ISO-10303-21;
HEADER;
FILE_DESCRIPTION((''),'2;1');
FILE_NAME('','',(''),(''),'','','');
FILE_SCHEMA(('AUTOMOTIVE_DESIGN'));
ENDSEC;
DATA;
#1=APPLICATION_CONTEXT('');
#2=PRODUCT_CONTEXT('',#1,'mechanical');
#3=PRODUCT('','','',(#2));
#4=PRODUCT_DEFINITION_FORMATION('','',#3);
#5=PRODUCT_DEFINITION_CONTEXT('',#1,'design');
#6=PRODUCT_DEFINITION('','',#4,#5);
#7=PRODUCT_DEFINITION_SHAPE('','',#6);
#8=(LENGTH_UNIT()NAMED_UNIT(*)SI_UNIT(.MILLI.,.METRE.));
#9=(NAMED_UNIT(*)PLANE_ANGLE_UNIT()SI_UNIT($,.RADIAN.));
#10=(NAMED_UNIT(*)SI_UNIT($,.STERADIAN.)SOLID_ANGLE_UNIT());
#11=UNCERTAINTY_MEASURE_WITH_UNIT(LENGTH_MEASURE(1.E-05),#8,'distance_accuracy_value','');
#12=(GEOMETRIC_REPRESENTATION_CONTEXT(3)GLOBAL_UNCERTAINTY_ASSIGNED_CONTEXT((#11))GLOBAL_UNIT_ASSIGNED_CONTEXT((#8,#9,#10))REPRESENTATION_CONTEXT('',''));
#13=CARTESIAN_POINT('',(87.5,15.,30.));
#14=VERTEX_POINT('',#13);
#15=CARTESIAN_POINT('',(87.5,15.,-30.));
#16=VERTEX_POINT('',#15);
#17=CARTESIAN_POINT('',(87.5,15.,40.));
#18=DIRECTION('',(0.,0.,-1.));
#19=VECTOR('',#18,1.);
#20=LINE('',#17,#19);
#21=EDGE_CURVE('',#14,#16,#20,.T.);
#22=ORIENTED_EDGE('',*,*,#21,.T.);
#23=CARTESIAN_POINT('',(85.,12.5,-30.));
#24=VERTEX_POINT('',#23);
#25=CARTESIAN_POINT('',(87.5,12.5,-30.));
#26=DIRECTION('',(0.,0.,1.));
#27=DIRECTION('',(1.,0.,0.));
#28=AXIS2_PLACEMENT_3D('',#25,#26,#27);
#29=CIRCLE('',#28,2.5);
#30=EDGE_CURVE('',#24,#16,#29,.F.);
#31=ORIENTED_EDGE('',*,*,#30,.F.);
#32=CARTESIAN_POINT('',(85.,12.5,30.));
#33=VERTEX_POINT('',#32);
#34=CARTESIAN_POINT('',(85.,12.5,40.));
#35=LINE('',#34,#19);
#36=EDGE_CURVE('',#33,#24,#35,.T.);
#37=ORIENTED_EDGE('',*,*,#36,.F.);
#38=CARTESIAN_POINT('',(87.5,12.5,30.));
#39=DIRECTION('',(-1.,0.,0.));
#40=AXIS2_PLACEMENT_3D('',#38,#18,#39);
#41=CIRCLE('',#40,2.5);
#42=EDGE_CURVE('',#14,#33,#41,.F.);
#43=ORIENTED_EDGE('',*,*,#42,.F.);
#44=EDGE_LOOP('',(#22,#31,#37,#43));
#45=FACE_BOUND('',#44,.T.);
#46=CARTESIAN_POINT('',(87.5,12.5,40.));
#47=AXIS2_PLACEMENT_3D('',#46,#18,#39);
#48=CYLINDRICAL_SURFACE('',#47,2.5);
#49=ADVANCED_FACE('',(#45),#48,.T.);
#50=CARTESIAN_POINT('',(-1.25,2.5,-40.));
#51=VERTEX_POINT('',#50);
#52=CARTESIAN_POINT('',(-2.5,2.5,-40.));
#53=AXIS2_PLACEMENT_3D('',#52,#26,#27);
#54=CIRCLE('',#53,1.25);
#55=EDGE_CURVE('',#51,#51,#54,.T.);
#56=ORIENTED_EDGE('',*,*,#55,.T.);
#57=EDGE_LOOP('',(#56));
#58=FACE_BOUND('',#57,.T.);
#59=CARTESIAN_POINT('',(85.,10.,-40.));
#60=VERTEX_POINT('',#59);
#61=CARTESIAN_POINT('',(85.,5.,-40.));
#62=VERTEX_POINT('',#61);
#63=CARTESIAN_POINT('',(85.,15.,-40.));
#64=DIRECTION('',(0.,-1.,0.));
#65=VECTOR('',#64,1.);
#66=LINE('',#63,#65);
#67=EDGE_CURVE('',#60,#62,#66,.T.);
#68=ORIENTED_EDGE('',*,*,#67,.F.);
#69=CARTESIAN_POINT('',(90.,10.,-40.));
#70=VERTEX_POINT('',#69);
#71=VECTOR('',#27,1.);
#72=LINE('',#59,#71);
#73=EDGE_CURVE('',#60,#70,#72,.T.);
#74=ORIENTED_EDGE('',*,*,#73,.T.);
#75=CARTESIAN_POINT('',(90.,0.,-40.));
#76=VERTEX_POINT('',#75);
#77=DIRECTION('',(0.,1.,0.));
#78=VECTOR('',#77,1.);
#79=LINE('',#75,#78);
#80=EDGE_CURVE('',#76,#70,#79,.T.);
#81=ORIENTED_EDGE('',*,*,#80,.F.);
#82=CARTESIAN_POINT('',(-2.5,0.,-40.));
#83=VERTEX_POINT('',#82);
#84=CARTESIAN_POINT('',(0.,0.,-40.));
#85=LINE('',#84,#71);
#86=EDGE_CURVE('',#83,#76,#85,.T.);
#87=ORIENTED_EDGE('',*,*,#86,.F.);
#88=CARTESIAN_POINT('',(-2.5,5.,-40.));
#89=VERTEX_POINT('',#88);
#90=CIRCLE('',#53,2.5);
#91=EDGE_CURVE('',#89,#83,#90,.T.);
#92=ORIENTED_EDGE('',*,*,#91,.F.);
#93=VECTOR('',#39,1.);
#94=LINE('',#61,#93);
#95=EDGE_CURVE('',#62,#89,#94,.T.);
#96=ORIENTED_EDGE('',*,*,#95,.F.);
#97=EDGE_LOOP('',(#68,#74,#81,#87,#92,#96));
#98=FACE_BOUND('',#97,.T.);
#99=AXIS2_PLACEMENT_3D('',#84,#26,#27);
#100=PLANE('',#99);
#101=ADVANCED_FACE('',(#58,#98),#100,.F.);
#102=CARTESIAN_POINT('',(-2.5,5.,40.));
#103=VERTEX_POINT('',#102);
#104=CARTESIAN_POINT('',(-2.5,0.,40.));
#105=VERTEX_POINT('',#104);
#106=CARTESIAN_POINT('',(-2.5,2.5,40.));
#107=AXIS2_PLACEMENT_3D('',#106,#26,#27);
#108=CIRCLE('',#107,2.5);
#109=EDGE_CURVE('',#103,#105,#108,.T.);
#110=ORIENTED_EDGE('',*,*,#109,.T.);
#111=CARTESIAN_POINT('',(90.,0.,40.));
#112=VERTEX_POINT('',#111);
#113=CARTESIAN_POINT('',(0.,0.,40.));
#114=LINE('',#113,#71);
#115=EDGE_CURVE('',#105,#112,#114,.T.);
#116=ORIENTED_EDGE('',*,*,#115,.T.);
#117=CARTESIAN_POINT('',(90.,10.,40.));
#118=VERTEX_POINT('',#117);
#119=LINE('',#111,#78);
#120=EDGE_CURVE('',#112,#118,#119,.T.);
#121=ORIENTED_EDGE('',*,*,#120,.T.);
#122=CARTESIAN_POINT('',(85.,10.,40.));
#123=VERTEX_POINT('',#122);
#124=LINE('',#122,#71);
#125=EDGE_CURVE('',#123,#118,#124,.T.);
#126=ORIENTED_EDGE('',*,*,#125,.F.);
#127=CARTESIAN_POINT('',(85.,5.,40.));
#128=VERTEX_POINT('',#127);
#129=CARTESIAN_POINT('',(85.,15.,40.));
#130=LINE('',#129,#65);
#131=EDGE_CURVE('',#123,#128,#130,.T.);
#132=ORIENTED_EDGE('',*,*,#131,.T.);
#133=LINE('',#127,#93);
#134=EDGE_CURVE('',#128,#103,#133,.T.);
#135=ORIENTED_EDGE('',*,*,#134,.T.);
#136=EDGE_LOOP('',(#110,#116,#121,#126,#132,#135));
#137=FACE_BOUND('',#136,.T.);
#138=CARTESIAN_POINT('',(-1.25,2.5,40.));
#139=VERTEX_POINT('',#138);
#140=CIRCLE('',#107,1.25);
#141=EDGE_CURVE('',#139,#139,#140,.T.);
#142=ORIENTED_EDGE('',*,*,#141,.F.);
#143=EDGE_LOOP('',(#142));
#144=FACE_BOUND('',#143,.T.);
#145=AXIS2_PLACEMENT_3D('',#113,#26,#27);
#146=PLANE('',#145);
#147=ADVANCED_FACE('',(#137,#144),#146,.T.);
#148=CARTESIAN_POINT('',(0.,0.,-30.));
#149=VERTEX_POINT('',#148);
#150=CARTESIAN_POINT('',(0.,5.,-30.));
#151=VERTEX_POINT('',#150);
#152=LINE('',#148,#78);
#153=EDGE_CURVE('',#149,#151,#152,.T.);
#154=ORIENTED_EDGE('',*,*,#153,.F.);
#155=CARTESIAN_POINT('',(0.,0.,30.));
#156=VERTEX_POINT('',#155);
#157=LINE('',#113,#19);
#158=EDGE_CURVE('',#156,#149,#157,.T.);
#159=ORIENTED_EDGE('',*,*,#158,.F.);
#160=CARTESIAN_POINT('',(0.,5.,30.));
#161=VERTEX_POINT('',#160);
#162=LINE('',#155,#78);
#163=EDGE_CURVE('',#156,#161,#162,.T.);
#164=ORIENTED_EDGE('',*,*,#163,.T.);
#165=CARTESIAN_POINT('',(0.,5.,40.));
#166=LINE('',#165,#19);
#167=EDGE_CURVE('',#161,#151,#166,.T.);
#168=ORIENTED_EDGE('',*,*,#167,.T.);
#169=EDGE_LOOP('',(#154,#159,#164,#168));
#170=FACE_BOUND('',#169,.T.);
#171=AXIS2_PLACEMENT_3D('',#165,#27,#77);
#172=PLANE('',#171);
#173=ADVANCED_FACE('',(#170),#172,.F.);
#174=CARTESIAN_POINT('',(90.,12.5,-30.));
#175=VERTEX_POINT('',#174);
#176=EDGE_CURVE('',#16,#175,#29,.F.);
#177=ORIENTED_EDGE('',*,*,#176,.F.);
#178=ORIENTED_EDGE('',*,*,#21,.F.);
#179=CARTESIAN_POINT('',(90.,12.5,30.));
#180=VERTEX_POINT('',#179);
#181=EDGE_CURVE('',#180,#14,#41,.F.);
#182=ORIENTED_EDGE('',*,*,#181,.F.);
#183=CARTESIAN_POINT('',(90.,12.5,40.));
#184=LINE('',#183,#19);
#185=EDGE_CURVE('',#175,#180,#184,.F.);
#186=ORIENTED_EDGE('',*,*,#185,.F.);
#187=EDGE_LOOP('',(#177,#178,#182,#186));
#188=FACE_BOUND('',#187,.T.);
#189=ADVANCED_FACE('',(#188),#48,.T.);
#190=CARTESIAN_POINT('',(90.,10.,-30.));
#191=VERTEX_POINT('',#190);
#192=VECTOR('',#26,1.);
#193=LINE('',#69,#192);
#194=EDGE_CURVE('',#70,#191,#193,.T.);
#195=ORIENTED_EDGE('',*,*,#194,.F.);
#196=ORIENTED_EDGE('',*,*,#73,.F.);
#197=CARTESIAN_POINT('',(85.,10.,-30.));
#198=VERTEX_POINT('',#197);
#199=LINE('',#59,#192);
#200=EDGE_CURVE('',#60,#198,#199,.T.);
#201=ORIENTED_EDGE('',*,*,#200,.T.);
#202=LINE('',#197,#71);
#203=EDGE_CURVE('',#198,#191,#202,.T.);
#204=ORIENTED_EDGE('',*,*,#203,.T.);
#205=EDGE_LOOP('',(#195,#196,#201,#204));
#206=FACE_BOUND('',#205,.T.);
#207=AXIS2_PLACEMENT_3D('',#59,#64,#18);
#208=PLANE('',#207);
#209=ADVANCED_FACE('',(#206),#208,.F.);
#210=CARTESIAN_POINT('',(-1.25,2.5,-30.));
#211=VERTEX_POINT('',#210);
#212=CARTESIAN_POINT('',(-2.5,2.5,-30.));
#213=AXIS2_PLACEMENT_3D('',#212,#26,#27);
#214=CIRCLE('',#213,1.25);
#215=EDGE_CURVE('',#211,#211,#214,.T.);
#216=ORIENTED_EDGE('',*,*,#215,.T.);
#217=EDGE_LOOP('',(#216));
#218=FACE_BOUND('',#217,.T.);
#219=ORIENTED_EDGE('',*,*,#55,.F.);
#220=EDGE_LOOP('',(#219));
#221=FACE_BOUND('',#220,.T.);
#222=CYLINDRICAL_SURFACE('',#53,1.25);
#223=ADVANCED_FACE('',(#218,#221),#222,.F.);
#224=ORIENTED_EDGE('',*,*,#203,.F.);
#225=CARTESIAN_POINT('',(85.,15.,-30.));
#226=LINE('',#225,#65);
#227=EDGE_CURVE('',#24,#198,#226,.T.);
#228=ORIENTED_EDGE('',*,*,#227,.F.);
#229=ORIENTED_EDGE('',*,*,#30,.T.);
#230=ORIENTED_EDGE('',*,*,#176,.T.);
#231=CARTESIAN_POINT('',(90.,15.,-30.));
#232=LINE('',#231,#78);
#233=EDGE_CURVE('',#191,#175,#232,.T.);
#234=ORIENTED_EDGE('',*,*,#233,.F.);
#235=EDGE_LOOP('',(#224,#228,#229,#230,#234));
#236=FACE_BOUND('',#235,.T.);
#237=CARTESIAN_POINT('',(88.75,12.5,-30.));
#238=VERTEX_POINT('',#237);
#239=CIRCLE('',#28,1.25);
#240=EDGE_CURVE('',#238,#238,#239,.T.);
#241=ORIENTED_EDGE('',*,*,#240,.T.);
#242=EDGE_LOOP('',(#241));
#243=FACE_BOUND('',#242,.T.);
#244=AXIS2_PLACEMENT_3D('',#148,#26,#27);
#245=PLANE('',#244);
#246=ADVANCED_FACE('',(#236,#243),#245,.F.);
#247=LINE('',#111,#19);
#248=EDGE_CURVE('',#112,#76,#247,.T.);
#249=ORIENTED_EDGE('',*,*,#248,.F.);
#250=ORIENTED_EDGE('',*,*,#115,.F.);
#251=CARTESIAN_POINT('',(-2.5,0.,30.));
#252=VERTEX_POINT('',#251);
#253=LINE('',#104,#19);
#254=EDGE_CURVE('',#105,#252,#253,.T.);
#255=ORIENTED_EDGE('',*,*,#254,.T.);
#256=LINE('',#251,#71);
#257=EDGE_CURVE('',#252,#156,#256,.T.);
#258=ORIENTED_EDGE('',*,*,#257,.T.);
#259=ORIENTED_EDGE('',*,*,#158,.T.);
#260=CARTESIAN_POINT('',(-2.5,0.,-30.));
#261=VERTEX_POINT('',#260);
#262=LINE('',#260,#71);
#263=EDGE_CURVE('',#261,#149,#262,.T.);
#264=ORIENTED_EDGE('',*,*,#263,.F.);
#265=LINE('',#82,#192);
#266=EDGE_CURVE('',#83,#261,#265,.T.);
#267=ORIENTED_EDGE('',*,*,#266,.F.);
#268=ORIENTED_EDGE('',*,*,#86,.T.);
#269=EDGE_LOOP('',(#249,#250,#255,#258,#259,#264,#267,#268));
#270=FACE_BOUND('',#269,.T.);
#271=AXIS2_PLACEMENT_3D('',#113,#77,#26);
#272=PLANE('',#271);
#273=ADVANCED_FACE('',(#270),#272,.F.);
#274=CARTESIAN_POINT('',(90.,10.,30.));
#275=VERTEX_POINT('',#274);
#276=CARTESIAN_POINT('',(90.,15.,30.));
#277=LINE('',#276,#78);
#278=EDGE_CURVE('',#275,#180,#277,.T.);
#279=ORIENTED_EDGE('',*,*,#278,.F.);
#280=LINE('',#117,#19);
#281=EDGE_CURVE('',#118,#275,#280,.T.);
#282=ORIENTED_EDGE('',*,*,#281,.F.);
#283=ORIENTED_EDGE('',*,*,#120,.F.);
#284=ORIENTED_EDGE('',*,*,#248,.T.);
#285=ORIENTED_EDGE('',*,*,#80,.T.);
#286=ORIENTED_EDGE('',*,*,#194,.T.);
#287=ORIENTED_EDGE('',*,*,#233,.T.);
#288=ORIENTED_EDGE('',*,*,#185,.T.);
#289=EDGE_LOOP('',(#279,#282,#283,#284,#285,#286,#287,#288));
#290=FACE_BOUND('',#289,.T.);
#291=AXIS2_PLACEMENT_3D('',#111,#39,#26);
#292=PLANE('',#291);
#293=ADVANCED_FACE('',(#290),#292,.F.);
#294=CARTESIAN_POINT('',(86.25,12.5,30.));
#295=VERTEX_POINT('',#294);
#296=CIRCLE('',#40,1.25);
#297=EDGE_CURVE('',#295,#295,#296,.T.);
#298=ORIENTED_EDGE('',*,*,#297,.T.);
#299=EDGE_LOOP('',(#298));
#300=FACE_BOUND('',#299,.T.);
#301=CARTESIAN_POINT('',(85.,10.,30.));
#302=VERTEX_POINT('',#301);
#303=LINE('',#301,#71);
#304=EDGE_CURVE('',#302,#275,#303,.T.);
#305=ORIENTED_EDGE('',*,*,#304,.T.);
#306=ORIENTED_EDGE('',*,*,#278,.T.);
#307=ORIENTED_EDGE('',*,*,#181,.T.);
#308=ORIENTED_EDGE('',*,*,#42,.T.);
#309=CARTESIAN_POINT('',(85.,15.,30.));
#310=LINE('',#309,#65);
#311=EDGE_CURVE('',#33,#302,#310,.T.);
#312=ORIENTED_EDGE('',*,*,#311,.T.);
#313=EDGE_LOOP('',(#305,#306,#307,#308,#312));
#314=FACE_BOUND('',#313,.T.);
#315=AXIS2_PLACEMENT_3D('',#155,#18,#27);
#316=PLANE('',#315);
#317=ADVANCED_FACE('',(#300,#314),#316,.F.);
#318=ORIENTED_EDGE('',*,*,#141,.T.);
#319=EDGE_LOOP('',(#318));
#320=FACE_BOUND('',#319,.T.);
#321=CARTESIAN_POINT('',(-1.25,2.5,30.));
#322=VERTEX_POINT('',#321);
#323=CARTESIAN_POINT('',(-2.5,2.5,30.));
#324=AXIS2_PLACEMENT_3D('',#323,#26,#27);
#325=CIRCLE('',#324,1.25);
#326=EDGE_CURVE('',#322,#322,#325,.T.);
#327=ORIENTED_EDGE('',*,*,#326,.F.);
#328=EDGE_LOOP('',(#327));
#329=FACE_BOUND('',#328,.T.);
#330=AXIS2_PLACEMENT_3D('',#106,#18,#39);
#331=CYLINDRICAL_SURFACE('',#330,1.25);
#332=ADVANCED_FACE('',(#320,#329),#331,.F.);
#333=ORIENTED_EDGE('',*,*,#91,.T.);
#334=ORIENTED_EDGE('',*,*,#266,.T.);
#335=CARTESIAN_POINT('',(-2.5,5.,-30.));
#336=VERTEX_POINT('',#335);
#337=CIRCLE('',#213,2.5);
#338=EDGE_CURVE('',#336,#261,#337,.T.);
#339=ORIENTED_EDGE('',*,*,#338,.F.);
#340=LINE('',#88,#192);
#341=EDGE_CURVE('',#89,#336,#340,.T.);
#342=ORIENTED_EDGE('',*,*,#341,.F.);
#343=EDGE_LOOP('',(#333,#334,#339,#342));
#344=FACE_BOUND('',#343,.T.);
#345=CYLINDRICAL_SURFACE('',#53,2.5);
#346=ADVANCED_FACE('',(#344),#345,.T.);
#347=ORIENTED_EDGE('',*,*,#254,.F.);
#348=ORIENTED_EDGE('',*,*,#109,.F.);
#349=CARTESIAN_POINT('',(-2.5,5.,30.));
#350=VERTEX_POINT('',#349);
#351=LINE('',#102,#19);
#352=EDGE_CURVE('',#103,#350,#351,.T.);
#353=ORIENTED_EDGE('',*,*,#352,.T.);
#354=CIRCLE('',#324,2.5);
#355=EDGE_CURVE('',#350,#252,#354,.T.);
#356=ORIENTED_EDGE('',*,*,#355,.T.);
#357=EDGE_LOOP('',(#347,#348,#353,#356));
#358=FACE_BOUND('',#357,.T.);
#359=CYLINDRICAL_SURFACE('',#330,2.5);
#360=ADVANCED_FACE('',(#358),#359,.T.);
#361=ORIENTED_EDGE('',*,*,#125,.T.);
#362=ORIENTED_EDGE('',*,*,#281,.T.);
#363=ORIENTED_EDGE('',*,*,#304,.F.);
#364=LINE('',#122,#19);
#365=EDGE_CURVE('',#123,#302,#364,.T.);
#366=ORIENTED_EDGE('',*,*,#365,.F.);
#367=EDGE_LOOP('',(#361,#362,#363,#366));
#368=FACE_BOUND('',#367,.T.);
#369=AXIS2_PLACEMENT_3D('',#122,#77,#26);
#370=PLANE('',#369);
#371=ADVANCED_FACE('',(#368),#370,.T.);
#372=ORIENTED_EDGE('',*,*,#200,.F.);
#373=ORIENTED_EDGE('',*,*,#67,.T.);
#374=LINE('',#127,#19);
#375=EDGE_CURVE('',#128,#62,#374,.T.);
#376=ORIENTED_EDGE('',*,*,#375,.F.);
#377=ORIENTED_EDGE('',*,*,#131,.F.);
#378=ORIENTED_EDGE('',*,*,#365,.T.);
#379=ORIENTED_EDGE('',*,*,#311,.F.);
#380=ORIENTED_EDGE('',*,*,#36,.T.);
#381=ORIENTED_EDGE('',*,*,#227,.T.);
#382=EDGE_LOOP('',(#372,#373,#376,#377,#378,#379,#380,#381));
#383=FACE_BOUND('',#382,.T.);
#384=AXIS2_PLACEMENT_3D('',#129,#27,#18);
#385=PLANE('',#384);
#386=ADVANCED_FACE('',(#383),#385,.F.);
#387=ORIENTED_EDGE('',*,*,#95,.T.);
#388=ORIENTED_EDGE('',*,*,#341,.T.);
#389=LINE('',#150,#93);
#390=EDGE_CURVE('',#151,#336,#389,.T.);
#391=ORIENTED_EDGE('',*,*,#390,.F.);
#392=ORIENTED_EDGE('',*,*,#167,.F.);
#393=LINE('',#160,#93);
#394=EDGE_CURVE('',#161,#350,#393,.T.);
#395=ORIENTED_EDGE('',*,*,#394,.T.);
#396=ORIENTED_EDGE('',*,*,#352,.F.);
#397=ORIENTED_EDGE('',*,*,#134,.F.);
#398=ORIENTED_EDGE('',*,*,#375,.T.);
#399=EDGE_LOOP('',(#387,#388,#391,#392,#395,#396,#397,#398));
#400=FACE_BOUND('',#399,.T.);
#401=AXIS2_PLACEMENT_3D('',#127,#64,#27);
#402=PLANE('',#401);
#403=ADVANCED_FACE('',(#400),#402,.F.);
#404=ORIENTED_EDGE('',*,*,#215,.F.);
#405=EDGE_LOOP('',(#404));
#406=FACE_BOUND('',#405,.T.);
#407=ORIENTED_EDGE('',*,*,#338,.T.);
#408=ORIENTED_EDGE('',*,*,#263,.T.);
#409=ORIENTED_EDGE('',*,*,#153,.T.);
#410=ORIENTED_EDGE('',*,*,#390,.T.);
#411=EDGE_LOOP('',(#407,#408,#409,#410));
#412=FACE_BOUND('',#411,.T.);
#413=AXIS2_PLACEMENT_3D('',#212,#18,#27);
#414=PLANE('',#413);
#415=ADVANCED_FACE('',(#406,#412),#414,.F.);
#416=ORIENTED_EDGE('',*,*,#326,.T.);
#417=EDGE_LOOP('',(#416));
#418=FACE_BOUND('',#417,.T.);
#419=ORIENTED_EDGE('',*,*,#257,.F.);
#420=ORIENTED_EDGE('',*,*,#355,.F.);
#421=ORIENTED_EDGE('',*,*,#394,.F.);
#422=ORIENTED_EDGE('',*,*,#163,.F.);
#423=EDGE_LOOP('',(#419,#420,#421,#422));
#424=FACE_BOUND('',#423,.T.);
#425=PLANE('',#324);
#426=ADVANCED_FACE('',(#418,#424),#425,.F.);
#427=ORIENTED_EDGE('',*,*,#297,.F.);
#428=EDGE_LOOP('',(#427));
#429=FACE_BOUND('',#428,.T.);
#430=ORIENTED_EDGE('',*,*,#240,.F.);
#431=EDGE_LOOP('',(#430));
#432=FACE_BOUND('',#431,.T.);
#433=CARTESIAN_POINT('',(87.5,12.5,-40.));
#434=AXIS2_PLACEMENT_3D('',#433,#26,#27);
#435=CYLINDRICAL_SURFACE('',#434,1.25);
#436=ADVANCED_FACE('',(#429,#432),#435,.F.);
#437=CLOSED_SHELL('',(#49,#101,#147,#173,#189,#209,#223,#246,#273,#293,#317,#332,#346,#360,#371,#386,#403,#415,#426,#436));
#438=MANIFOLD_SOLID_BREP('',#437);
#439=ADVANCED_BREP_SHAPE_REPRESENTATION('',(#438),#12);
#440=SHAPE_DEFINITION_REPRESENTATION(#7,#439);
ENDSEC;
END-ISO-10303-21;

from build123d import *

# Parameters (mm, degrees)
BOSS_EXTRUDE1_DEPTH     = 40
BOSS_EXTRUDE2_START     = 30
SKETCH2_R               = 1.25
BOSS_EXTRUDE2_DEPTH     = 10
CUT_EXTRUDE1_START      = -30
SKETCH3_W               = 5
SKETCH3_H               = 5
CUT_EXTRUDE1_DEPTH      = 10
CUT_EXTRUDE2_DEPTH      = 100.624294226
CUT_EXTRUDE2_DEPTH_BACK = 100.624294226
SKETCH4_R               = 1.25
FILLET1_R               = 2.5


with BuildPart() as part:
    # Sketch1 → Boss-Extrude1 (new, symmetric)
    with BuildSketch(Plane.XY):
        Polygon((0, 0), (90, 0), (90, 15), (85, 15), (85, 5), (0, 5), align=None)
    extrude(amount=BOSS_EXTRUDE1_DEPTH, both=True)

    # Sketch2 → Boss-Extrude2 (add)
    with BuildSketch(Plane.XY.offset(BOSS_EXTRUDE2_START)):
        with BuildLine():
            Line((0, 5), (-2.5, 5))
            ThreePointArc((-2.5, 5), (-5, 2.5), (-2.5, 0))
            Line((-2.5, 0), (0, 0))
            Line((0, 0), (0, 5))
        make_face()
        with Locations((-2.5, 2.5)):
            Circle(SKETCH2_R, mode=Mode.SUBTRACT)
    boss_extrude2 = extrude(amount=BOSS_EXTRUDE2_DEPTH)

    # Mirror2: Boss-Extrude2 across plane
    add(boss_extrude2.mirror(Plane.XY))

    # Sketch3 → Cut-Extrude1 (cut)
    with BuildSketch(Plane.XY.offset(CUT_EXTRUDE1_START)):
        with Locations((87.5, 12.5)):
            Rectangle(SKETCH3_W, SKETCH3_H)
    cut_extrude1 = extrude(amount=-CUT_EXTRUDE1_DEPTH, mode=Mode.SUBTRACT)

    # Mirror3: Cut-Extrude1 across plane
    add(cut_extrude1.mirror(Plane.XY), mode=Mode.SUBTRACT)

    # Sketch4 → Cut-Extrude2 (cut, two sides: drawn at the far end of the back side and taken through both)
    with BuildSketch(Plane.XY.offset(-CUT_EXTRUDE2_DEPTH_BACK)):
        with Locations((87.5, 12.5)):
            Circle(SKETCH4_R)
    extrude(amount=CUT_EXTRUDE2_DEPTH + CUT_EXTRUDE2_DEPTH_BACK, mode=Mode.SUBTRACT)

    # Fillet1
    fillet1_edges = [part.edges().sort_by_distance(p)[0] for p in [
        (85, 15, 0),
        (90, 15, 0),
    ]]
    fillet(fillet1_edges, radius=FILLET1_R - 0.0001)  # a hair under: the kernel refuses the full size


solid = part.part
